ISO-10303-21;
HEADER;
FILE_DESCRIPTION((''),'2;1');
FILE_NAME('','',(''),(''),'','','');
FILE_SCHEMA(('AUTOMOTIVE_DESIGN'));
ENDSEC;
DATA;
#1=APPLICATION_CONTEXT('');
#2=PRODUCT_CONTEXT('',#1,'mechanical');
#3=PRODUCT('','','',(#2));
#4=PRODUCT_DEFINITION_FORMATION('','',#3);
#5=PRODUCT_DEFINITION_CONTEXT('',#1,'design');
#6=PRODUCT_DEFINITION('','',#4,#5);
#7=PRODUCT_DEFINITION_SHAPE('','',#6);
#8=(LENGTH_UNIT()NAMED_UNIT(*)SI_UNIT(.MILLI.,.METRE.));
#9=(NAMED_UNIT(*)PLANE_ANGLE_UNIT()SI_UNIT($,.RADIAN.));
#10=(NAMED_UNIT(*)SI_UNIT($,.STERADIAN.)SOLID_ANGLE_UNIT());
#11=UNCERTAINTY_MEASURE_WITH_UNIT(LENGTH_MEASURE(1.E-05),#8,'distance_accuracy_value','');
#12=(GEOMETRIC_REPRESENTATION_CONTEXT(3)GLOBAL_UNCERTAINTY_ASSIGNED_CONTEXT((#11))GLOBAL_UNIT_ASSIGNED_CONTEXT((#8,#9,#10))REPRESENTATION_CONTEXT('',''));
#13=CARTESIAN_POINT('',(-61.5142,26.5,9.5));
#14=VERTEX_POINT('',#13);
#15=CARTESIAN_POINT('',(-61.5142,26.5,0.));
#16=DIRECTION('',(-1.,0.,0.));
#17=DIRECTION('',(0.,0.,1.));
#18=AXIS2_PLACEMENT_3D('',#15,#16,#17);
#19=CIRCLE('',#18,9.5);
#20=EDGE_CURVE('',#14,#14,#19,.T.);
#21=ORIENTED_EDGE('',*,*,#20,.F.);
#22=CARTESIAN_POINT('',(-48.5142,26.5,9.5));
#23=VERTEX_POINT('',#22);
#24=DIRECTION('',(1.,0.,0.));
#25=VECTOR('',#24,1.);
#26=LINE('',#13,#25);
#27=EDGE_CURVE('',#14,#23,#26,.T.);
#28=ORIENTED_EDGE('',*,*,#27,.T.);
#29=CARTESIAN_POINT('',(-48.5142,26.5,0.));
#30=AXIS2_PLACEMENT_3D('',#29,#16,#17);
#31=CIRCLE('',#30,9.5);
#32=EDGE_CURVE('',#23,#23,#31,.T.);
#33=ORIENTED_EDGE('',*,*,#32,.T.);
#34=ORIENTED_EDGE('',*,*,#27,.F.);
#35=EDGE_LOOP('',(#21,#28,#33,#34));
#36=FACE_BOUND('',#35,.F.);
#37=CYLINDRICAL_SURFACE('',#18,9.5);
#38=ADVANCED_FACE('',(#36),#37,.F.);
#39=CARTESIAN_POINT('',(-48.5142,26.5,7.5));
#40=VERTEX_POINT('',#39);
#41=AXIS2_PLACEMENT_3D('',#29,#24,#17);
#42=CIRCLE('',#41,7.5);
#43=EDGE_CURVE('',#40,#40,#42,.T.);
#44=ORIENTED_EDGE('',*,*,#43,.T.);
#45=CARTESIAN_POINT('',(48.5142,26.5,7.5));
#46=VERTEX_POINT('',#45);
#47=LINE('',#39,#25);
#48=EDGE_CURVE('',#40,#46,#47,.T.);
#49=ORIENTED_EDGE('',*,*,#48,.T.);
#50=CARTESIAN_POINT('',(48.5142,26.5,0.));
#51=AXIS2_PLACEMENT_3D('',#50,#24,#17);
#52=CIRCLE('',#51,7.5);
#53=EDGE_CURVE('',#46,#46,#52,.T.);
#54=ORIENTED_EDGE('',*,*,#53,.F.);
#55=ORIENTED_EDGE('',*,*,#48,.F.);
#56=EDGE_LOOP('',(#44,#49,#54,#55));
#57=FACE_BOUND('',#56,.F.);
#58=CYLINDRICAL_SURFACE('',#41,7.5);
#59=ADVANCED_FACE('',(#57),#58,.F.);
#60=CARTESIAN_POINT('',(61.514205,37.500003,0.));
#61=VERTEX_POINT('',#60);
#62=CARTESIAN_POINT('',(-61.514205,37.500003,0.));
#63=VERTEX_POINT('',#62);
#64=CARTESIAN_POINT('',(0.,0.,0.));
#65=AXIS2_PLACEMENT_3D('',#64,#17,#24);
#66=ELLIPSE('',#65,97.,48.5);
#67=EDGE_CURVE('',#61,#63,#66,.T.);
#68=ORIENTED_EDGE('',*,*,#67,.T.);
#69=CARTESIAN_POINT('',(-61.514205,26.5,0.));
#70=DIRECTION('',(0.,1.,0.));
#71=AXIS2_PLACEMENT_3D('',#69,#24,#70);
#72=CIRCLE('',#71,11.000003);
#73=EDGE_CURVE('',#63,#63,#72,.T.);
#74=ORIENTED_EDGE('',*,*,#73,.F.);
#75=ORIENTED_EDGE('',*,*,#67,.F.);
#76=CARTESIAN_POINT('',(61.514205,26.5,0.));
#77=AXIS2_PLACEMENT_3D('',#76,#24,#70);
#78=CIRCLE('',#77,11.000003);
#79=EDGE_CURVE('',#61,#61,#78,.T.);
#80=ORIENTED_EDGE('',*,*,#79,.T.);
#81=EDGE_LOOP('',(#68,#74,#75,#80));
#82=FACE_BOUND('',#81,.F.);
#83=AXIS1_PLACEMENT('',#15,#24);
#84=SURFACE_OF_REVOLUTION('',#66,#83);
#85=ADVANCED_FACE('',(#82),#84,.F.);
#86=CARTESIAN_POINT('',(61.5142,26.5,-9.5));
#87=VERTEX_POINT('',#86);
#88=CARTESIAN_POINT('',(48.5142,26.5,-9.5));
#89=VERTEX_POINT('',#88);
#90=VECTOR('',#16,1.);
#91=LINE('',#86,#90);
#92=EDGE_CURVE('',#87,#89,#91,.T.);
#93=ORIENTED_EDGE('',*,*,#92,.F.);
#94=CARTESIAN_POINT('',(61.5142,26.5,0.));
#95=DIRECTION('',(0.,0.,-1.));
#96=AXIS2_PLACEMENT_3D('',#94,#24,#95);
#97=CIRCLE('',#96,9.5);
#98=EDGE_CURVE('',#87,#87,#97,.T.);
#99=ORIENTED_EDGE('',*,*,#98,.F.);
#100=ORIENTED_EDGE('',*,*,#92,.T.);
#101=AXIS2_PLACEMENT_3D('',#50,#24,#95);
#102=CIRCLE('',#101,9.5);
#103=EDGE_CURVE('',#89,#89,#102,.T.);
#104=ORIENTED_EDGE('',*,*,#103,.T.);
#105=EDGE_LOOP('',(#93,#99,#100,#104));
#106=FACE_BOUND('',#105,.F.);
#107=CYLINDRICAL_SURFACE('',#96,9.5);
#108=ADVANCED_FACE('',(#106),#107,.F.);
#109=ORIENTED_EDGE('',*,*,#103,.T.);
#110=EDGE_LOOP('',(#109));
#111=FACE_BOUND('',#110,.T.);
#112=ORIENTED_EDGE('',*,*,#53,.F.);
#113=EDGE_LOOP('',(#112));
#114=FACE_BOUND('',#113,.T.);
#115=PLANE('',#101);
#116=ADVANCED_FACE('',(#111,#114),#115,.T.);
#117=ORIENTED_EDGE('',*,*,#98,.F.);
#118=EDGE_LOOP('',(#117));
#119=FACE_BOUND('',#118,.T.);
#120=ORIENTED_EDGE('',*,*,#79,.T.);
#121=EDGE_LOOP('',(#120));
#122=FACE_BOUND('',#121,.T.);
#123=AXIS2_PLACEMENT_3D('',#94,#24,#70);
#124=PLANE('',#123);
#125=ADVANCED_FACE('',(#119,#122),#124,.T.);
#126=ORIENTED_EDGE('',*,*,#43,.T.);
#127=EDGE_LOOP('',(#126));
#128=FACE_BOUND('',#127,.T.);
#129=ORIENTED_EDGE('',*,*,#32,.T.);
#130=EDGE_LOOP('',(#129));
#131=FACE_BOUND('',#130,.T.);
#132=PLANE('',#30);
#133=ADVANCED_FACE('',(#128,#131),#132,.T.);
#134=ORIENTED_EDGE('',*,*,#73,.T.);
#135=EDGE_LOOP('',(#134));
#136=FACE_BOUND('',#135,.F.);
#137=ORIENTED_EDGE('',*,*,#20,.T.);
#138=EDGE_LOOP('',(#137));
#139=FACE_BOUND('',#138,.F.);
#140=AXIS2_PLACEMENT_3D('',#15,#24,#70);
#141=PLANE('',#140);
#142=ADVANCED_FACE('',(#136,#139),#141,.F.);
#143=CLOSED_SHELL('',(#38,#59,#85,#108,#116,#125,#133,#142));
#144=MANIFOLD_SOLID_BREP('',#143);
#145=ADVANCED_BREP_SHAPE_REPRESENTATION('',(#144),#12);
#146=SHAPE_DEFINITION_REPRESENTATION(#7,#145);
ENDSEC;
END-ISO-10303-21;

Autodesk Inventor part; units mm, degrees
ref_plane "YZ Plane" through (0, 0, 0) normal (1, 0, 0) x (0, 1, 0)
ref_plane "XZ Plane" through (0, 0, 0) normal (0, 1, 0) x (-1, 0, 0)
ref_plane "Work Plane1" through (0, 0, 0) normal (0, -0.8660254, 0.5) x (1, 0, 0)
sketch "Sketch1" plane through (0, 0, 0) normal (0, -0.8660254, 0.5) x (1, 0, 0)
  circle A0 centre (0, 0) radius 97 construction
  dimension "d1" = 194
sketch "Sketch2" plane through (0, 0, 0) normal (0, 0, 1) x (1, 0, 0)
  circle A0 centre (0, 26.5) radius 22 construction
  ellipse E0 centre (0, 0) end of major axis (97, 0) minor radius 48.5 construction
  line L0 (0, 26.5) -> (-61.5142, 26.5)
  line L1 (0, 37.5) -> (-61.5142, 37.5) construction
  line L2 (-61.5142, 37.5) -> (-61.5142, 26.5)
  line L3 (0, 0) -> (0, 48.5) construction
  line L4 (0, 26.5) -> (61.5142, 26.5)
  line L5 (61.5142, 37.5) -> (61.5142, 26.5)
  ellipse E1 centre (0, 0) end of major axis (97, 0) minor radius 48.5 (61.5142, 37.5) -> (-61.5142, 37.5) ccw
  dimension "d2" = 44
  dimension "d3" = 11
revolve "Revolution1" add sketch "Sketch2" angle 360 about axis through (0, 26.5, 0) along (1, 0, 0)
sketch "Sketch3" plane through (61.5142, 26.5, 0) normal (1, 0, 0) x (0, 0, -1)
  circle A0 centre (0, 0) radius 11 projected
  circle A1 centre (0, 0) radius 9.5
  point P0 (0, -26.5)
  point P1 (0, 11)
  dimension "d5" = 19
extrude "Extrusion1" cut sketch "Sketch3" against normal blind 13 contours A1
sketch "Sketch4" plane through (-61.5142, 26.5, 0) normal (-1, 0, 0) x (0, 0, 1)
  circle A0 centre (0, 0) radius 9.5
  dimension "d8" = 19
extrude "Extrusion2" cut sketch "Sketch4" against normal blind 13
hole "Hole1" at (-48.5142, 26.5, 0) direction (1, 0, 0) diameter 15 end up to surface
properties part number "roller 8-19-6 bearing" material "Aluminum 6061"
